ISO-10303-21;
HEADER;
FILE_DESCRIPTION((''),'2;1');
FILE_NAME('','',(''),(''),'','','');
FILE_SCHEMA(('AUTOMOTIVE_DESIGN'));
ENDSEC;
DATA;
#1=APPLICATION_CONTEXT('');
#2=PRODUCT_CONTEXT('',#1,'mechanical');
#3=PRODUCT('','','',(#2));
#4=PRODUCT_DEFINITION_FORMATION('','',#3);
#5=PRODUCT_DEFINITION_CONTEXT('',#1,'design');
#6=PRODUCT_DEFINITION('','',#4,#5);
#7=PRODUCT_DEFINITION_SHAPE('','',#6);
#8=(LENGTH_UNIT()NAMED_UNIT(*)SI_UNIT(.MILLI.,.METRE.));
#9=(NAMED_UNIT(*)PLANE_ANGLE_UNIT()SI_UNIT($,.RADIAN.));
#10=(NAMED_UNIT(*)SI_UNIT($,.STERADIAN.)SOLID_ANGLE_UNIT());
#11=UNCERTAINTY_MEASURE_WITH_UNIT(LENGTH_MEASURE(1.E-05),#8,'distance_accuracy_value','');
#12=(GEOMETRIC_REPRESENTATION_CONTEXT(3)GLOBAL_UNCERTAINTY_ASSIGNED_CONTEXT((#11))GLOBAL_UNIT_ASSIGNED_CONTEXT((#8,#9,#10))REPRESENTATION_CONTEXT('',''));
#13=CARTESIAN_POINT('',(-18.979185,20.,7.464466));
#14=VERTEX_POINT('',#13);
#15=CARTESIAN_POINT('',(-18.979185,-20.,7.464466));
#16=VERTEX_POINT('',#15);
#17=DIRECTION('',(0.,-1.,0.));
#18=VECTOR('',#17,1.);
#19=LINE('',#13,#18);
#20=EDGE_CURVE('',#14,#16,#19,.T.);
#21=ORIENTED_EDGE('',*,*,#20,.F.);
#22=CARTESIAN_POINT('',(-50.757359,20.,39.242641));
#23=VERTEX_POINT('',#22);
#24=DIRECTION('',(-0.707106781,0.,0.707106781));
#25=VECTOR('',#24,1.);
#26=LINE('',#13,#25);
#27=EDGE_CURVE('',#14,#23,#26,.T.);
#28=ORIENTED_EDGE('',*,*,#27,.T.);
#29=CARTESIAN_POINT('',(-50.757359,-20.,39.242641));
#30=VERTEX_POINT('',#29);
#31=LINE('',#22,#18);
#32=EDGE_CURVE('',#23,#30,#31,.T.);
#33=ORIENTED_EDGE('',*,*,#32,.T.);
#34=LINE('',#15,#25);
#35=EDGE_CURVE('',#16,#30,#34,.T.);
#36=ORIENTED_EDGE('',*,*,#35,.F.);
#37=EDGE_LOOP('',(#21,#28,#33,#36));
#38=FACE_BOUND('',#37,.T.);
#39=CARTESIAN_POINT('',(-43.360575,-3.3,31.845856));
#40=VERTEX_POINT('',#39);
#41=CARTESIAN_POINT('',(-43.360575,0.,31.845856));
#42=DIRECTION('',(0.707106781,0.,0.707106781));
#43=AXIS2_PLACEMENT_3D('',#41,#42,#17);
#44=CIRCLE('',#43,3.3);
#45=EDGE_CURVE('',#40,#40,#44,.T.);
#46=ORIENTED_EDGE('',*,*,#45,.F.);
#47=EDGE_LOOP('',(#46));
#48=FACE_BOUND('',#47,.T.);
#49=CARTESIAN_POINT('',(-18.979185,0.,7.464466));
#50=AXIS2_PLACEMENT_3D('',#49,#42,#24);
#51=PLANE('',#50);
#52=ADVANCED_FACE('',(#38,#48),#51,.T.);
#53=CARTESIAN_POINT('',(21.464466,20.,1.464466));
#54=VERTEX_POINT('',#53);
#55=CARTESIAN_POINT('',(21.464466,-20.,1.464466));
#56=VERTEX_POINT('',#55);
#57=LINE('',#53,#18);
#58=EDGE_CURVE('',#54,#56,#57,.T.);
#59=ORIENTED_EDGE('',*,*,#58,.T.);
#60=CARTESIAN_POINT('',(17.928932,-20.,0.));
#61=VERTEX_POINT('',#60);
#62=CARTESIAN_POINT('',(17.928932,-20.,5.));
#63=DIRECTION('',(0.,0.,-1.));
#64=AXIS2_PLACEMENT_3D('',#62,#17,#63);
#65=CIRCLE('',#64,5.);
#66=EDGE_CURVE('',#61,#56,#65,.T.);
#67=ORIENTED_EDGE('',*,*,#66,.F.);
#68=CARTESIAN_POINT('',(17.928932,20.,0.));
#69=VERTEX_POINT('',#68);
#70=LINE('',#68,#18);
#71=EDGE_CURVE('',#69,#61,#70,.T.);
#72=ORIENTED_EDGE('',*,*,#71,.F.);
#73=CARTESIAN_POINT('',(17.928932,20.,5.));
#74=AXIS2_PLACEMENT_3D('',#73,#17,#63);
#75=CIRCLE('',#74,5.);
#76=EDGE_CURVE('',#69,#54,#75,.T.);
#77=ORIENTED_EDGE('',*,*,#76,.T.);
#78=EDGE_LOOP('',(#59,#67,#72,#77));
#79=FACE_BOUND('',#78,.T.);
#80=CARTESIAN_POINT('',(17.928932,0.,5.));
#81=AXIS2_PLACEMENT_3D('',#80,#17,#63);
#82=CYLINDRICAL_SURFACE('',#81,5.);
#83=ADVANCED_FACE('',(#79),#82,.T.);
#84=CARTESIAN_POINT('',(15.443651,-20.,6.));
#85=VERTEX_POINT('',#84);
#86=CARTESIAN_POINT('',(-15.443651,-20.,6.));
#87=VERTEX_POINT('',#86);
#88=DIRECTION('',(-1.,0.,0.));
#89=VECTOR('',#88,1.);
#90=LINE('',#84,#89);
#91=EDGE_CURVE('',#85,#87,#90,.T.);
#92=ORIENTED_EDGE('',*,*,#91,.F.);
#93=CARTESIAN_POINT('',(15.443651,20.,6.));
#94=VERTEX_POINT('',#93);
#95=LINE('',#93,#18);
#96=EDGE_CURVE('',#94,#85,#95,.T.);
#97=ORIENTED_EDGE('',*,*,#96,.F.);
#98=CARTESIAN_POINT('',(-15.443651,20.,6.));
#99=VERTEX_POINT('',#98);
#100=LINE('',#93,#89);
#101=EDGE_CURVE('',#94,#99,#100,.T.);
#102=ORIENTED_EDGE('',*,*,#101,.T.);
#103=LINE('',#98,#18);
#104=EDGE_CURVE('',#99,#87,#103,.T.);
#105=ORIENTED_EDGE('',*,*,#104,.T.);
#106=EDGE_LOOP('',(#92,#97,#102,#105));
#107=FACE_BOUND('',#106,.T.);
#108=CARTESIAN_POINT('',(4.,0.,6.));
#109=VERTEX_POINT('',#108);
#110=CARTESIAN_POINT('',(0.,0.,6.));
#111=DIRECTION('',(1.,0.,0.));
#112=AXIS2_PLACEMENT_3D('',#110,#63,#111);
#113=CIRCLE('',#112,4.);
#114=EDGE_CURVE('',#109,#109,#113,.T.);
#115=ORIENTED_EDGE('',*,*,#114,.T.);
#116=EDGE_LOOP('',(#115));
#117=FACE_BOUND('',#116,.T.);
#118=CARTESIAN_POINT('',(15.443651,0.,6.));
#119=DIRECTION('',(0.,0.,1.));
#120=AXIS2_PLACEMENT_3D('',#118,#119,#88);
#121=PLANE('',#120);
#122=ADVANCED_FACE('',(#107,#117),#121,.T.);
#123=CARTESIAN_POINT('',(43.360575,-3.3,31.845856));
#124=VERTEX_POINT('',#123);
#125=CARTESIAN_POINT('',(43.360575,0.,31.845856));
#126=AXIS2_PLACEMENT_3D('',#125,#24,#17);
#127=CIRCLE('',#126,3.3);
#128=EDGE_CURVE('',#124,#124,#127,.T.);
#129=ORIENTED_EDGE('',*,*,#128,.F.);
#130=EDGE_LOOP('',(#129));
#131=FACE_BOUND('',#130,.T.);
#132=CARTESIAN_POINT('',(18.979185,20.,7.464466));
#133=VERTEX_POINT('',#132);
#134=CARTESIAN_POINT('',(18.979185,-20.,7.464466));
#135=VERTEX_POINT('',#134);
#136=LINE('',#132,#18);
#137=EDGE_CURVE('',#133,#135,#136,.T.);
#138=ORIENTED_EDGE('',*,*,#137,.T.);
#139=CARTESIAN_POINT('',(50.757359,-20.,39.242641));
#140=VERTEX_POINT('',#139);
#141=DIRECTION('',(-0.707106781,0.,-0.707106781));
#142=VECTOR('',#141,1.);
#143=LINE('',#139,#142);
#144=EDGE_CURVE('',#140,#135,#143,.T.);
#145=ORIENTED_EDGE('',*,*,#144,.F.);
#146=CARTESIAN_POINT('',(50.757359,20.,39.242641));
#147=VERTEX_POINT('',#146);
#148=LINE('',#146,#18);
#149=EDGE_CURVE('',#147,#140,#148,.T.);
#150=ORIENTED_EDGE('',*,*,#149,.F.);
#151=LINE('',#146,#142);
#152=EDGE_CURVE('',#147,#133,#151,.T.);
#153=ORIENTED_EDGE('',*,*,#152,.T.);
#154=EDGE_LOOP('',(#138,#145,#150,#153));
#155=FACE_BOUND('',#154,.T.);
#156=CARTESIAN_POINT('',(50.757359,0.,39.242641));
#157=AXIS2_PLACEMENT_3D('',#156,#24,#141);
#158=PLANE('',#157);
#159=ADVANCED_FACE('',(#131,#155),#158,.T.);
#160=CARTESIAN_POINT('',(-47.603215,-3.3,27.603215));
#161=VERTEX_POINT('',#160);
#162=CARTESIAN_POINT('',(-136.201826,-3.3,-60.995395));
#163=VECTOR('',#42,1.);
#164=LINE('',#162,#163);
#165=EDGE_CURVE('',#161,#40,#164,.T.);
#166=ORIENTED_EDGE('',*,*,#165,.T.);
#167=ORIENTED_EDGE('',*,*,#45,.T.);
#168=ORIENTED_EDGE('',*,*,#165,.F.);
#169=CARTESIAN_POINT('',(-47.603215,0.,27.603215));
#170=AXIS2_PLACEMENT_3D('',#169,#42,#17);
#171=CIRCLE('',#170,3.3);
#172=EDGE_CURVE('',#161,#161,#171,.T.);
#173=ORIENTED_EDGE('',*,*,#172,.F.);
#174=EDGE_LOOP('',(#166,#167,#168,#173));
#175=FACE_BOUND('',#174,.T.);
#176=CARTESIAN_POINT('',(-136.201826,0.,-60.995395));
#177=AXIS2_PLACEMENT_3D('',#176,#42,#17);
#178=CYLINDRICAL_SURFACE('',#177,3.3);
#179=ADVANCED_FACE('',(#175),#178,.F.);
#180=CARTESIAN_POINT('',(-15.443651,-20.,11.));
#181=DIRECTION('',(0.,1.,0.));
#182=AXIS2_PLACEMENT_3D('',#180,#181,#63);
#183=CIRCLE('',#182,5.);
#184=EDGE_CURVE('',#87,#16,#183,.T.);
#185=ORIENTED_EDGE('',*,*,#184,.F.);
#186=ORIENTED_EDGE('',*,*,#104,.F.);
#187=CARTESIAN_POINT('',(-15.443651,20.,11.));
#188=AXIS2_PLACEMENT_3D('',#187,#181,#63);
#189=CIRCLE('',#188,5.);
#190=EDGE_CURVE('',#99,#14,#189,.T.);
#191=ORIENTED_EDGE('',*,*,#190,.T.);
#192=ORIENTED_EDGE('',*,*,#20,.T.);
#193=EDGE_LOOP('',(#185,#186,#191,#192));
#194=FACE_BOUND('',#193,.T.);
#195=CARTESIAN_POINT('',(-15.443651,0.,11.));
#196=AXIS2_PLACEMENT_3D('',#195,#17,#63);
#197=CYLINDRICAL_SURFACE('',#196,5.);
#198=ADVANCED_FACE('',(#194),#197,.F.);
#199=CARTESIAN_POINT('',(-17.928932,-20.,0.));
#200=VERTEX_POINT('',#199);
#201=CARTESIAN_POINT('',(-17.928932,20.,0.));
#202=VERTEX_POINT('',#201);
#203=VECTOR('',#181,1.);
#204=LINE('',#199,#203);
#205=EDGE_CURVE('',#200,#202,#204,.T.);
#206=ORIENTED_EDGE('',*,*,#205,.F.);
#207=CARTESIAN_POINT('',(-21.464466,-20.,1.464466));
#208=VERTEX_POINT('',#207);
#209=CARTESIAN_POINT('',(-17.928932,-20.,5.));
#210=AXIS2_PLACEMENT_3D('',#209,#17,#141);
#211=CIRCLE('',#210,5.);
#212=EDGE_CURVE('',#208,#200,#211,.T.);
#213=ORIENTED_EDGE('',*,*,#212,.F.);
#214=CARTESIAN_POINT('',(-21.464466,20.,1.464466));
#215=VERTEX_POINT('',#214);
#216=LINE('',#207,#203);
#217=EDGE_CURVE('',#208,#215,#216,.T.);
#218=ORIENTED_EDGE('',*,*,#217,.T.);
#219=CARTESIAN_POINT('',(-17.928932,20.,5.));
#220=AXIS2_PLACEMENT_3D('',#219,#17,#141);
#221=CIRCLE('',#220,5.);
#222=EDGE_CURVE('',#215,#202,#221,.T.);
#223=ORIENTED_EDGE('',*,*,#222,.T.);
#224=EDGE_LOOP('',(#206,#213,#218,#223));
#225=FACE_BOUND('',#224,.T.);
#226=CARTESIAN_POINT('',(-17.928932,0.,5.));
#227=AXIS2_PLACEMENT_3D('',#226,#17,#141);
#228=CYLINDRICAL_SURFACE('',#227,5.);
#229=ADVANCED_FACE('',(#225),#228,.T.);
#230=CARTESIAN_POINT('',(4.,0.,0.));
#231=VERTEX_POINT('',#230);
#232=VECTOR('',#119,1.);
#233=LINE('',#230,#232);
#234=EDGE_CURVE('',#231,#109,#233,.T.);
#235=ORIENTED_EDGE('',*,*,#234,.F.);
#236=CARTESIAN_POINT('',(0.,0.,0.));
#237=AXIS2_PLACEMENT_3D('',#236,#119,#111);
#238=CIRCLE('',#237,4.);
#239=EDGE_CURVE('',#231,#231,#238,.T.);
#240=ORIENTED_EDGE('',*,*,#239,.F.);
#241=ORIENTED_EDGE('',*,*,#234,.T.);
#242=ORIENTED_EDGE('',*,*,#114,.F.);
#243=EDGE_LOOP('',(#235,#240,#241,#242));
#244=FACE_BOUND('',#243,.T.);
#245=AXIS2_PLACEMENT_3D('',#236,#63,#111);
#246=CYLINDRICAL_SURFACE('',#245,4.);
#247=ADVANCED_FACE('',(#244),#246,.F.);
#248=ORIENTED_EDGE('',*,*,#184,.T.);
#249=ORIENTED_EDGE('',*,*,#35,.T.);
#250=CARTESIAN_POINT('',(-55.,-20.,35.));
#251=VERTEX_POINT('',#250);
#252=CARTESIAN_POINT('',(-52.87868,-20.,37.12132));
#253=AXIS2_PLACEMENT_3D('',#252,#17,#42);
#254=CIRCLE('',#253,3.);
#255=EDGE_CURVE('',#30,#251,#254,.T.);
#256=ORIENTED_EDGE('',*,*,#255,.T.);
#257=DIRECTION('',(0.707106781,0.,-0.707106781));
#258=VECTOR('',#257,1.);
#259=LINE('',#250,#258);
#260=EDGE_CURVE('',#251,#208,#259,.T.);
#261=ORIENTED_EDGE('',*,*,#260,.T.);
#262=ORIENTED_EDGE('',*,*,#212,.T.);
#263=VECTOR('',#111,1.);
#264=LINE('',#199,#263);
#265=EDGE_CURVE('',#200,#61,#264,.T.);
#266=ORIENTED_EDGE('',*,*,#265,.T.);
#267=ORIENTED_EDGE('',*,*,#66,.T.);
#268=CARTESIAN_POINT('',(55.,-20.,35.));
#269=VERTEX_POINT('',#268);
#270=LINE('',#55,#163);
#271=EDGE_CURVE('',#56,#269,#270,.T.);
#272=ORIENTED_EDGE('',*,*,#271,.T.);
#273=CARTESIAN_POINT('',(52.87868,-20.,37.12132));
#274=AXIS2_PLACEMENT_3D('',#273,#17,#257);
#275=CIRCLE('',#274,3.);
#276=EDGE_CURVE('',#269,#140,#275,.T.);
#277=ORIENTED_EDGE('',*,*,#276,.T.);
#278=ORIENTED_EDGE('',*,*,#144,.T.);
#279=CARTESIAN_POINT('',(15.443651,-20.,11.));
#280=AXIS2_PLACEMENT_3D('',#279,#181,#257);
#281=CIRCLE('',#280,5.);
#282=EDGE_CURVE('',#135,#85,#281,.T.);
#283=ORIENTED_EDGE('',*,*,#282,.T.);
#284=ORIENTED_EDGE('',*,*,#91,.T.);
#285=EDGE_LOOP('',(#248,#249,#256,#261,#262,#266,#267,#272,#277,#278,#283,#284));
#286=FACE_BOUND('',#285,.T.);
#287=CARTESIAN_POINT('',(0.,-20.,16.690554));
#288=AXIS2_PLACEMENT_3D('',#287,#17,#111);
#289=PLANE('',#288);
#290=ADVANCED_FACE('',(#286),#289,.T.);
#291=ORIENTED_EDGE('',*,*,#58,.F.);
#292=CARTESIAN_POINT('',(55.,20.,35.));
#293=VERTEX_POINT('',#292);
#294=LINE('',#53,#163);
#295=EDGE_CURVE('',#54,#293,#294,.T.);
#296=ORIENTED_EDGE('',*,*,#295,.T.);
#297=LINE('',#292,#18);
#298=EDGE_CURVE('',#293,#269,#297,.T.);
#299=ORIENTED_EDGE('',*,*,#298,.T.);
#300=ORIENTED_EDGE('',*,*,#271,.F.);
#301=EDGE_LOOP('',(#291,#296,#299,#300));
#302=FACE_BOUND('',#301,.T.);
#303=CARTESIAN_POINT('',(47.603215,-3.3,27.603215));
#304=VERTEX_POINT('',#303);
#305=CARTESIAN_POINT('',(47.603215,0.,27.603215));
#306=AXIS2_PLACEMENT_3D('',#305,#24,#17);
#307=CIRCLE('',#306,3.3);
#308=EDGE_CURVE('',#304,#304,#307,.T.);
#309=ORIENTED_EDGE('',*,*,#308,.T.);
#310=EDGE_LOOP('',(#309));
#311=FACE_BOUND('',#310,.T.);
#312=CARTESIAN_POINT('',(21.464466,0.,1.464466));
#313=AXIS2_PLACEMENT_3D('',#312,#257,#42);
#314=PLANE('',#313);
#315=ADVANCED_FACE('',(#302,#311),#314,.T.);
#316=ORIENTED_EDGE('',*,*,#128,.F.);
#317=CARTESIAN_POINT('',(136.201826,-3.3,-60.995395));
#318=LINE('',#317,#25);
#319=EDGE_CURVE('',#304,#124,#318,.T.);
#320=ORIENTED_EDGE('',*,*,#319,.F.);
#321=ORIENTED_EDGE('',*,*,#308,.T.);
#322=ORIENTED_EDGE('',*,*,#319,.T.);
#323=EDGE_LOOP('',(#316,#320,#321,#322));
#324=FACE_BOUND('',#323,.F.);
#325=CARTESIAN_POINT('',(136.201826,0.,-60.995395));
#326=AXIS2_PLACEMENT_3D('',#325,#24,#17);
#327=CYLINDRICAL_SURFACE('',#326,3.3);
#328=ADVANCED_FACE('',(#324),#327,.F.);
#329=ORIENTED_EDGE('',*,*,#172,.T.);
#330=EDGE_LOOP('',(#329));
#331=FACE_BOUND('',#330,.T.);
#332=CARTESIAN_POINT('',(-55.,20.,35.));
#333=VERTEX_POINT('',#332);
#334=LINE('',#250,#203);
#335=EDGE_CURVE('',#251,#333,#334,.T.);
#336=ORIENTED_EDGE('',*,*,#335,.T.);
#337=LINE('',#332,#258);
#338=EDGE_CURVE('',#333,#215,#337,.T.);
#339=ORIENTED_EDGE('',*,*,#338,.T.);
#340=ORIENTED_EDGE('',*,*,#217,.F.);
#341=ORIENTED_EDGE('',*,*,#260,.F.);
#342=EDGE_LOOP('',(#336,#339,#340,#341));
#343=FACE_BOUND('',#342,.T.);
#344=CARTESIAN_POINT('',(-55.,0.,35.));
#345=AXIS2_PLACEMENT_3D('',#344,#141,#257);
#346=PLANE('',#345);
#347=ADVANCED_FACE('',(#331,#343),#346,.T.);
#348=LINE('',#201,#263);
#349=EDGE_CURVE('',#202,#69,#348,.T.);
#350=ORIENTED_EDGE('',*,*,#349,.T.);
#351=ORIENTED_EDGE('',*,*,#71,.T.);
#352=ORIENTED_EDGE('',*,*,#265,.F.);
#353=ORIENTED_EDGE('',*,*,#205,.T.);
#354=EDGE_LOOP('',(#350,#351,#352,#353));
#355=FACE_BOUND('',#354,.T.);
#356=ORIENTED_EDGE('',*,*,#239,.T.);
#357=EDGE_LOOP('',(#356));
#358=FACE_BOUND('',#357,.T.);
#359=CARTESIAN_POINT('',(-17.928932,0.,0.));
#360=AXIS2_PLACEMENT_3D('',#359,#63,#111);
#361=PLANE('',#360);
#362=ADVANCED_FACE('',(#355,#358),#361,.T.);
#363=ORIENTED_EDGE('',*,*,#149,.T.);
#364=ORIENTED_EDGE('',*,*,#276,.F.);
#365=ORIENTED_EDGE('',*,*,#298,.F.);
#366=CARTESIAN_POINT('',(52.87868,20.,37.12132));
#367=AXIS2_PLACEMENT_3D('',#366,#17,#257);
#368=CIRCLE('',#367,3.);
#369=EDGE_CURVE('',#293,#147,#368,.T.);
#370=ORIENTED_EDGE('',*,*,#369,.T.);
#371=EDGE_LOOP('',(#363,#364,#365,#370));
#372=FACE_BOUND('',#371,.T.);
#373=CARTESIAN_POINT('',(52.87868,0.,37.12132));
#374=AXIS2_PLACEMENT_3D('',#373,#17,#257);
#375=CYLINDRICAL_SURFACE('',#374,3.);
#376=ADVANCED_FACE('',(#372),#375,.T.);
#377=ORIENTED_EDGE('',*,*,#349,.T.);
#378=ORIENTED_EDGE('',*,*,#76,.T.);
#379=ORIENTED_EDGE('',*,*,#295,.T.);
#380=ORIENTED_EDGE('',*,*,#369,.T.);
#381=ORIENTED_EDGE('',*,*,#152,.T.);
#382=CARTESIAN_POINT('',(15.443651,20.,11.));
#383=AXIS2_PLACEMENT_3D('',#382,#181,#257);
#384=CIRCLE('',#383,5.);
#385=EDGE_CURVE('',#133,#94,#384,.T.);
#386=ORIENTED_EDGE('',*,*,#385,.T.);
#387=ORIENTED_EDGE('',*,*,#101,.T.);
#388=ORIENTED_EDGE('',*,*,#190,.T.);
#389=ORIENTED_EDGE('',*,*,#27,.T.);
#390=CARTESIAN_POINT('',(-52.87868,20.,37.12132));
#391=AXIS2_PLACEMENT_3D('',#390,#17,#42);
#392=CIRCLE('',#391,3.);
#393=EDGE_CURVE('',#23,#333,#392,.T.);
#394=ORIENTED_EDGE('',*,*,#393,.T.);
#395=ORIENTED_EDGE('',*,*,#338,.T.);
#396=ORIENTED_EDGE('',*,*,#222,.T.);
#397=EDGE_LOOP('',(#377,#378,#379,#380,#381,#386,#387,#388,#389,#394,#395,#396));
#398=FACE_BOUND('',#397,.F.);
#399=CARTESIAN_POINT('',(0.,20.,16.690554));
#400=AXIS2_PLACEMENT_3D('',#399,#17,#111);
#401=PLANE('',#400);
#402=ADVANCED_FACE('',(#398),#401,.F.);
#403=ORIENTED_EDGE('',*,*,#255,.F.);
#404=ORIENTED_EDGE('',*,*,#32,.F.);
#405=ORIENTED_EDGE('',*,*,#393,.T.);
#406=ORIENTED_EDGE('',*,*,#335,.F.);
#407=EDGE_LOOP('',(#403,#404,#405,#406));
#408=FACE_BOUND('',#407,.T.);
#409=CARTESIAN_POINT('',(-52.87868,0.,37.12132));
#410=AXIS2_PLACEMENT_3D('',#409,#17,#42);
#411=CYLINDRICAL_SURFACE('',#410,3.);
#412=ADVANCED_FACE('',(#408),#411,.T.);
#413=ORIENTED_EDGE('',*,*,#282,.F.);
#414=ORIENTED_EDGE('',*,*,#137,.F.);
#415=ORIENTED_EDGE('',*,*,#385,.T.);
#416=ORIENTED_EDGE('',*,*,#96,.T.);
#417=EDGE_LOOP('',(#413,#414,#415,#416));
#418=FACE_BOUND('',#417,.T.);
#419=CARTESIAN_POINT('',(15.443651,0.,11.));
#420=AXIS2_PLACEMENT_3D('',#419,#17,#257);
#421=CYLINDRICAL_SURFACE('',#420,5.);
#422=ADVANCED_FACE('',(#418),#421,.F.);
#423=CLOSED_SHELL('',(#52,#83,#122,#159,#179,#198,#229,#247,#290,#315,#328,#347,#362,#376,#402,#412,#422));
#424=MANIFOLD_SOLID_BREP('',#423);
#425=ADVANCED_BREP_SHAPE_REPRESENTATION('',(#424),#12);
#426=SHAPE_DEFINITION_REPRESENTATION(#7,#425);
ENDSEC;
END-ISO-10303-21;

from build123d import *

# Parameters (mm, degrees)
F1_DEPTH = 20
F2_R     = 4
F3_DEPTH = 40.1223203436
F6_D     = 6.6


# Not quite as in the source:
# - a pattern or mirror of a feature is missing from the dataset's text; its kind, count and spacing are read off the source's solid


with BuildPart() as f1:
    # F0 (on Front) → F1 (new body, symmetric)
    with BuildSketch(Plane.XZ):
        with BuildLine():
            Line((-17.9289321881, 0), (0, 0))
            Line((0, 0), (17.9289321881, 0))
            ThreePointArc((17.9289321881, 0), (19.84234935, 0.3806023374), (21.4644660941, 1.4644660941))
            Line((21.4644660941, 1.4644660941), (55, 35))
            ThreePointArc((55, 35), (55, 39.2426406871), (50.7573593129, 39.2426406871))
            Line((50.7573593129, 39.2426406871), (18.9791847198, 7.4644660941))
            ThreePointArc((18.9791847198, 7.4644660941), (17.3570679757, 6.3806023374), (15.4436508139, 6))
            Line((15.4436508139, 6), (0, 6))
            Line((0, 6), (-15.4436508139, 6))
            ThreePointArc((-15.4436508139, 6), (-17.3570679757, 6.3806023374), (-18.9791847198, 7.4644660941))
            Line((-18.9791847198, 7.4644660941), (-50.7573593129, 39.2426406871))
            ThreePointArc((-50.7573593129, 39.2426406871), (-55, 39.2426406871), (-55, 35))
            Line((-55, 35), (-21.4644660941, 1.4644660941))
            ThreePointArc((-21.4644660941, 1.4644660941), (-19.84234935, 0.3806023374), (-17.9289321881, 0))
        make_face()
    extrude(amount=F1_DEPTH, both=True)

    # F2 (on Top) → F3 (cut, through all)
    with BuildSketch(Plane.XY):
        Circle(F2_R)
    extrude(amount=F3_DEPTH, mode=Mode.SUBTRACT)

    # F6 (through all)
    with Locations(Plane(origin=(10, 0, -10), x_dir=(0, 1, 0), z_dir=(0.7071067812, 0, -0.7071067812))):
        with Locations((0, 53.1789772213)):
            f6 = Hole(F6_D / 2)

    # F6_copies: F6 across plane
    add(f6.mirror(Plane(origin=(0, 0, 0), x_dir=(0, 0, -1), z_dir=(-1, 0, 0))), mode=Mode.SUBTRACT)


solid = f1.part
